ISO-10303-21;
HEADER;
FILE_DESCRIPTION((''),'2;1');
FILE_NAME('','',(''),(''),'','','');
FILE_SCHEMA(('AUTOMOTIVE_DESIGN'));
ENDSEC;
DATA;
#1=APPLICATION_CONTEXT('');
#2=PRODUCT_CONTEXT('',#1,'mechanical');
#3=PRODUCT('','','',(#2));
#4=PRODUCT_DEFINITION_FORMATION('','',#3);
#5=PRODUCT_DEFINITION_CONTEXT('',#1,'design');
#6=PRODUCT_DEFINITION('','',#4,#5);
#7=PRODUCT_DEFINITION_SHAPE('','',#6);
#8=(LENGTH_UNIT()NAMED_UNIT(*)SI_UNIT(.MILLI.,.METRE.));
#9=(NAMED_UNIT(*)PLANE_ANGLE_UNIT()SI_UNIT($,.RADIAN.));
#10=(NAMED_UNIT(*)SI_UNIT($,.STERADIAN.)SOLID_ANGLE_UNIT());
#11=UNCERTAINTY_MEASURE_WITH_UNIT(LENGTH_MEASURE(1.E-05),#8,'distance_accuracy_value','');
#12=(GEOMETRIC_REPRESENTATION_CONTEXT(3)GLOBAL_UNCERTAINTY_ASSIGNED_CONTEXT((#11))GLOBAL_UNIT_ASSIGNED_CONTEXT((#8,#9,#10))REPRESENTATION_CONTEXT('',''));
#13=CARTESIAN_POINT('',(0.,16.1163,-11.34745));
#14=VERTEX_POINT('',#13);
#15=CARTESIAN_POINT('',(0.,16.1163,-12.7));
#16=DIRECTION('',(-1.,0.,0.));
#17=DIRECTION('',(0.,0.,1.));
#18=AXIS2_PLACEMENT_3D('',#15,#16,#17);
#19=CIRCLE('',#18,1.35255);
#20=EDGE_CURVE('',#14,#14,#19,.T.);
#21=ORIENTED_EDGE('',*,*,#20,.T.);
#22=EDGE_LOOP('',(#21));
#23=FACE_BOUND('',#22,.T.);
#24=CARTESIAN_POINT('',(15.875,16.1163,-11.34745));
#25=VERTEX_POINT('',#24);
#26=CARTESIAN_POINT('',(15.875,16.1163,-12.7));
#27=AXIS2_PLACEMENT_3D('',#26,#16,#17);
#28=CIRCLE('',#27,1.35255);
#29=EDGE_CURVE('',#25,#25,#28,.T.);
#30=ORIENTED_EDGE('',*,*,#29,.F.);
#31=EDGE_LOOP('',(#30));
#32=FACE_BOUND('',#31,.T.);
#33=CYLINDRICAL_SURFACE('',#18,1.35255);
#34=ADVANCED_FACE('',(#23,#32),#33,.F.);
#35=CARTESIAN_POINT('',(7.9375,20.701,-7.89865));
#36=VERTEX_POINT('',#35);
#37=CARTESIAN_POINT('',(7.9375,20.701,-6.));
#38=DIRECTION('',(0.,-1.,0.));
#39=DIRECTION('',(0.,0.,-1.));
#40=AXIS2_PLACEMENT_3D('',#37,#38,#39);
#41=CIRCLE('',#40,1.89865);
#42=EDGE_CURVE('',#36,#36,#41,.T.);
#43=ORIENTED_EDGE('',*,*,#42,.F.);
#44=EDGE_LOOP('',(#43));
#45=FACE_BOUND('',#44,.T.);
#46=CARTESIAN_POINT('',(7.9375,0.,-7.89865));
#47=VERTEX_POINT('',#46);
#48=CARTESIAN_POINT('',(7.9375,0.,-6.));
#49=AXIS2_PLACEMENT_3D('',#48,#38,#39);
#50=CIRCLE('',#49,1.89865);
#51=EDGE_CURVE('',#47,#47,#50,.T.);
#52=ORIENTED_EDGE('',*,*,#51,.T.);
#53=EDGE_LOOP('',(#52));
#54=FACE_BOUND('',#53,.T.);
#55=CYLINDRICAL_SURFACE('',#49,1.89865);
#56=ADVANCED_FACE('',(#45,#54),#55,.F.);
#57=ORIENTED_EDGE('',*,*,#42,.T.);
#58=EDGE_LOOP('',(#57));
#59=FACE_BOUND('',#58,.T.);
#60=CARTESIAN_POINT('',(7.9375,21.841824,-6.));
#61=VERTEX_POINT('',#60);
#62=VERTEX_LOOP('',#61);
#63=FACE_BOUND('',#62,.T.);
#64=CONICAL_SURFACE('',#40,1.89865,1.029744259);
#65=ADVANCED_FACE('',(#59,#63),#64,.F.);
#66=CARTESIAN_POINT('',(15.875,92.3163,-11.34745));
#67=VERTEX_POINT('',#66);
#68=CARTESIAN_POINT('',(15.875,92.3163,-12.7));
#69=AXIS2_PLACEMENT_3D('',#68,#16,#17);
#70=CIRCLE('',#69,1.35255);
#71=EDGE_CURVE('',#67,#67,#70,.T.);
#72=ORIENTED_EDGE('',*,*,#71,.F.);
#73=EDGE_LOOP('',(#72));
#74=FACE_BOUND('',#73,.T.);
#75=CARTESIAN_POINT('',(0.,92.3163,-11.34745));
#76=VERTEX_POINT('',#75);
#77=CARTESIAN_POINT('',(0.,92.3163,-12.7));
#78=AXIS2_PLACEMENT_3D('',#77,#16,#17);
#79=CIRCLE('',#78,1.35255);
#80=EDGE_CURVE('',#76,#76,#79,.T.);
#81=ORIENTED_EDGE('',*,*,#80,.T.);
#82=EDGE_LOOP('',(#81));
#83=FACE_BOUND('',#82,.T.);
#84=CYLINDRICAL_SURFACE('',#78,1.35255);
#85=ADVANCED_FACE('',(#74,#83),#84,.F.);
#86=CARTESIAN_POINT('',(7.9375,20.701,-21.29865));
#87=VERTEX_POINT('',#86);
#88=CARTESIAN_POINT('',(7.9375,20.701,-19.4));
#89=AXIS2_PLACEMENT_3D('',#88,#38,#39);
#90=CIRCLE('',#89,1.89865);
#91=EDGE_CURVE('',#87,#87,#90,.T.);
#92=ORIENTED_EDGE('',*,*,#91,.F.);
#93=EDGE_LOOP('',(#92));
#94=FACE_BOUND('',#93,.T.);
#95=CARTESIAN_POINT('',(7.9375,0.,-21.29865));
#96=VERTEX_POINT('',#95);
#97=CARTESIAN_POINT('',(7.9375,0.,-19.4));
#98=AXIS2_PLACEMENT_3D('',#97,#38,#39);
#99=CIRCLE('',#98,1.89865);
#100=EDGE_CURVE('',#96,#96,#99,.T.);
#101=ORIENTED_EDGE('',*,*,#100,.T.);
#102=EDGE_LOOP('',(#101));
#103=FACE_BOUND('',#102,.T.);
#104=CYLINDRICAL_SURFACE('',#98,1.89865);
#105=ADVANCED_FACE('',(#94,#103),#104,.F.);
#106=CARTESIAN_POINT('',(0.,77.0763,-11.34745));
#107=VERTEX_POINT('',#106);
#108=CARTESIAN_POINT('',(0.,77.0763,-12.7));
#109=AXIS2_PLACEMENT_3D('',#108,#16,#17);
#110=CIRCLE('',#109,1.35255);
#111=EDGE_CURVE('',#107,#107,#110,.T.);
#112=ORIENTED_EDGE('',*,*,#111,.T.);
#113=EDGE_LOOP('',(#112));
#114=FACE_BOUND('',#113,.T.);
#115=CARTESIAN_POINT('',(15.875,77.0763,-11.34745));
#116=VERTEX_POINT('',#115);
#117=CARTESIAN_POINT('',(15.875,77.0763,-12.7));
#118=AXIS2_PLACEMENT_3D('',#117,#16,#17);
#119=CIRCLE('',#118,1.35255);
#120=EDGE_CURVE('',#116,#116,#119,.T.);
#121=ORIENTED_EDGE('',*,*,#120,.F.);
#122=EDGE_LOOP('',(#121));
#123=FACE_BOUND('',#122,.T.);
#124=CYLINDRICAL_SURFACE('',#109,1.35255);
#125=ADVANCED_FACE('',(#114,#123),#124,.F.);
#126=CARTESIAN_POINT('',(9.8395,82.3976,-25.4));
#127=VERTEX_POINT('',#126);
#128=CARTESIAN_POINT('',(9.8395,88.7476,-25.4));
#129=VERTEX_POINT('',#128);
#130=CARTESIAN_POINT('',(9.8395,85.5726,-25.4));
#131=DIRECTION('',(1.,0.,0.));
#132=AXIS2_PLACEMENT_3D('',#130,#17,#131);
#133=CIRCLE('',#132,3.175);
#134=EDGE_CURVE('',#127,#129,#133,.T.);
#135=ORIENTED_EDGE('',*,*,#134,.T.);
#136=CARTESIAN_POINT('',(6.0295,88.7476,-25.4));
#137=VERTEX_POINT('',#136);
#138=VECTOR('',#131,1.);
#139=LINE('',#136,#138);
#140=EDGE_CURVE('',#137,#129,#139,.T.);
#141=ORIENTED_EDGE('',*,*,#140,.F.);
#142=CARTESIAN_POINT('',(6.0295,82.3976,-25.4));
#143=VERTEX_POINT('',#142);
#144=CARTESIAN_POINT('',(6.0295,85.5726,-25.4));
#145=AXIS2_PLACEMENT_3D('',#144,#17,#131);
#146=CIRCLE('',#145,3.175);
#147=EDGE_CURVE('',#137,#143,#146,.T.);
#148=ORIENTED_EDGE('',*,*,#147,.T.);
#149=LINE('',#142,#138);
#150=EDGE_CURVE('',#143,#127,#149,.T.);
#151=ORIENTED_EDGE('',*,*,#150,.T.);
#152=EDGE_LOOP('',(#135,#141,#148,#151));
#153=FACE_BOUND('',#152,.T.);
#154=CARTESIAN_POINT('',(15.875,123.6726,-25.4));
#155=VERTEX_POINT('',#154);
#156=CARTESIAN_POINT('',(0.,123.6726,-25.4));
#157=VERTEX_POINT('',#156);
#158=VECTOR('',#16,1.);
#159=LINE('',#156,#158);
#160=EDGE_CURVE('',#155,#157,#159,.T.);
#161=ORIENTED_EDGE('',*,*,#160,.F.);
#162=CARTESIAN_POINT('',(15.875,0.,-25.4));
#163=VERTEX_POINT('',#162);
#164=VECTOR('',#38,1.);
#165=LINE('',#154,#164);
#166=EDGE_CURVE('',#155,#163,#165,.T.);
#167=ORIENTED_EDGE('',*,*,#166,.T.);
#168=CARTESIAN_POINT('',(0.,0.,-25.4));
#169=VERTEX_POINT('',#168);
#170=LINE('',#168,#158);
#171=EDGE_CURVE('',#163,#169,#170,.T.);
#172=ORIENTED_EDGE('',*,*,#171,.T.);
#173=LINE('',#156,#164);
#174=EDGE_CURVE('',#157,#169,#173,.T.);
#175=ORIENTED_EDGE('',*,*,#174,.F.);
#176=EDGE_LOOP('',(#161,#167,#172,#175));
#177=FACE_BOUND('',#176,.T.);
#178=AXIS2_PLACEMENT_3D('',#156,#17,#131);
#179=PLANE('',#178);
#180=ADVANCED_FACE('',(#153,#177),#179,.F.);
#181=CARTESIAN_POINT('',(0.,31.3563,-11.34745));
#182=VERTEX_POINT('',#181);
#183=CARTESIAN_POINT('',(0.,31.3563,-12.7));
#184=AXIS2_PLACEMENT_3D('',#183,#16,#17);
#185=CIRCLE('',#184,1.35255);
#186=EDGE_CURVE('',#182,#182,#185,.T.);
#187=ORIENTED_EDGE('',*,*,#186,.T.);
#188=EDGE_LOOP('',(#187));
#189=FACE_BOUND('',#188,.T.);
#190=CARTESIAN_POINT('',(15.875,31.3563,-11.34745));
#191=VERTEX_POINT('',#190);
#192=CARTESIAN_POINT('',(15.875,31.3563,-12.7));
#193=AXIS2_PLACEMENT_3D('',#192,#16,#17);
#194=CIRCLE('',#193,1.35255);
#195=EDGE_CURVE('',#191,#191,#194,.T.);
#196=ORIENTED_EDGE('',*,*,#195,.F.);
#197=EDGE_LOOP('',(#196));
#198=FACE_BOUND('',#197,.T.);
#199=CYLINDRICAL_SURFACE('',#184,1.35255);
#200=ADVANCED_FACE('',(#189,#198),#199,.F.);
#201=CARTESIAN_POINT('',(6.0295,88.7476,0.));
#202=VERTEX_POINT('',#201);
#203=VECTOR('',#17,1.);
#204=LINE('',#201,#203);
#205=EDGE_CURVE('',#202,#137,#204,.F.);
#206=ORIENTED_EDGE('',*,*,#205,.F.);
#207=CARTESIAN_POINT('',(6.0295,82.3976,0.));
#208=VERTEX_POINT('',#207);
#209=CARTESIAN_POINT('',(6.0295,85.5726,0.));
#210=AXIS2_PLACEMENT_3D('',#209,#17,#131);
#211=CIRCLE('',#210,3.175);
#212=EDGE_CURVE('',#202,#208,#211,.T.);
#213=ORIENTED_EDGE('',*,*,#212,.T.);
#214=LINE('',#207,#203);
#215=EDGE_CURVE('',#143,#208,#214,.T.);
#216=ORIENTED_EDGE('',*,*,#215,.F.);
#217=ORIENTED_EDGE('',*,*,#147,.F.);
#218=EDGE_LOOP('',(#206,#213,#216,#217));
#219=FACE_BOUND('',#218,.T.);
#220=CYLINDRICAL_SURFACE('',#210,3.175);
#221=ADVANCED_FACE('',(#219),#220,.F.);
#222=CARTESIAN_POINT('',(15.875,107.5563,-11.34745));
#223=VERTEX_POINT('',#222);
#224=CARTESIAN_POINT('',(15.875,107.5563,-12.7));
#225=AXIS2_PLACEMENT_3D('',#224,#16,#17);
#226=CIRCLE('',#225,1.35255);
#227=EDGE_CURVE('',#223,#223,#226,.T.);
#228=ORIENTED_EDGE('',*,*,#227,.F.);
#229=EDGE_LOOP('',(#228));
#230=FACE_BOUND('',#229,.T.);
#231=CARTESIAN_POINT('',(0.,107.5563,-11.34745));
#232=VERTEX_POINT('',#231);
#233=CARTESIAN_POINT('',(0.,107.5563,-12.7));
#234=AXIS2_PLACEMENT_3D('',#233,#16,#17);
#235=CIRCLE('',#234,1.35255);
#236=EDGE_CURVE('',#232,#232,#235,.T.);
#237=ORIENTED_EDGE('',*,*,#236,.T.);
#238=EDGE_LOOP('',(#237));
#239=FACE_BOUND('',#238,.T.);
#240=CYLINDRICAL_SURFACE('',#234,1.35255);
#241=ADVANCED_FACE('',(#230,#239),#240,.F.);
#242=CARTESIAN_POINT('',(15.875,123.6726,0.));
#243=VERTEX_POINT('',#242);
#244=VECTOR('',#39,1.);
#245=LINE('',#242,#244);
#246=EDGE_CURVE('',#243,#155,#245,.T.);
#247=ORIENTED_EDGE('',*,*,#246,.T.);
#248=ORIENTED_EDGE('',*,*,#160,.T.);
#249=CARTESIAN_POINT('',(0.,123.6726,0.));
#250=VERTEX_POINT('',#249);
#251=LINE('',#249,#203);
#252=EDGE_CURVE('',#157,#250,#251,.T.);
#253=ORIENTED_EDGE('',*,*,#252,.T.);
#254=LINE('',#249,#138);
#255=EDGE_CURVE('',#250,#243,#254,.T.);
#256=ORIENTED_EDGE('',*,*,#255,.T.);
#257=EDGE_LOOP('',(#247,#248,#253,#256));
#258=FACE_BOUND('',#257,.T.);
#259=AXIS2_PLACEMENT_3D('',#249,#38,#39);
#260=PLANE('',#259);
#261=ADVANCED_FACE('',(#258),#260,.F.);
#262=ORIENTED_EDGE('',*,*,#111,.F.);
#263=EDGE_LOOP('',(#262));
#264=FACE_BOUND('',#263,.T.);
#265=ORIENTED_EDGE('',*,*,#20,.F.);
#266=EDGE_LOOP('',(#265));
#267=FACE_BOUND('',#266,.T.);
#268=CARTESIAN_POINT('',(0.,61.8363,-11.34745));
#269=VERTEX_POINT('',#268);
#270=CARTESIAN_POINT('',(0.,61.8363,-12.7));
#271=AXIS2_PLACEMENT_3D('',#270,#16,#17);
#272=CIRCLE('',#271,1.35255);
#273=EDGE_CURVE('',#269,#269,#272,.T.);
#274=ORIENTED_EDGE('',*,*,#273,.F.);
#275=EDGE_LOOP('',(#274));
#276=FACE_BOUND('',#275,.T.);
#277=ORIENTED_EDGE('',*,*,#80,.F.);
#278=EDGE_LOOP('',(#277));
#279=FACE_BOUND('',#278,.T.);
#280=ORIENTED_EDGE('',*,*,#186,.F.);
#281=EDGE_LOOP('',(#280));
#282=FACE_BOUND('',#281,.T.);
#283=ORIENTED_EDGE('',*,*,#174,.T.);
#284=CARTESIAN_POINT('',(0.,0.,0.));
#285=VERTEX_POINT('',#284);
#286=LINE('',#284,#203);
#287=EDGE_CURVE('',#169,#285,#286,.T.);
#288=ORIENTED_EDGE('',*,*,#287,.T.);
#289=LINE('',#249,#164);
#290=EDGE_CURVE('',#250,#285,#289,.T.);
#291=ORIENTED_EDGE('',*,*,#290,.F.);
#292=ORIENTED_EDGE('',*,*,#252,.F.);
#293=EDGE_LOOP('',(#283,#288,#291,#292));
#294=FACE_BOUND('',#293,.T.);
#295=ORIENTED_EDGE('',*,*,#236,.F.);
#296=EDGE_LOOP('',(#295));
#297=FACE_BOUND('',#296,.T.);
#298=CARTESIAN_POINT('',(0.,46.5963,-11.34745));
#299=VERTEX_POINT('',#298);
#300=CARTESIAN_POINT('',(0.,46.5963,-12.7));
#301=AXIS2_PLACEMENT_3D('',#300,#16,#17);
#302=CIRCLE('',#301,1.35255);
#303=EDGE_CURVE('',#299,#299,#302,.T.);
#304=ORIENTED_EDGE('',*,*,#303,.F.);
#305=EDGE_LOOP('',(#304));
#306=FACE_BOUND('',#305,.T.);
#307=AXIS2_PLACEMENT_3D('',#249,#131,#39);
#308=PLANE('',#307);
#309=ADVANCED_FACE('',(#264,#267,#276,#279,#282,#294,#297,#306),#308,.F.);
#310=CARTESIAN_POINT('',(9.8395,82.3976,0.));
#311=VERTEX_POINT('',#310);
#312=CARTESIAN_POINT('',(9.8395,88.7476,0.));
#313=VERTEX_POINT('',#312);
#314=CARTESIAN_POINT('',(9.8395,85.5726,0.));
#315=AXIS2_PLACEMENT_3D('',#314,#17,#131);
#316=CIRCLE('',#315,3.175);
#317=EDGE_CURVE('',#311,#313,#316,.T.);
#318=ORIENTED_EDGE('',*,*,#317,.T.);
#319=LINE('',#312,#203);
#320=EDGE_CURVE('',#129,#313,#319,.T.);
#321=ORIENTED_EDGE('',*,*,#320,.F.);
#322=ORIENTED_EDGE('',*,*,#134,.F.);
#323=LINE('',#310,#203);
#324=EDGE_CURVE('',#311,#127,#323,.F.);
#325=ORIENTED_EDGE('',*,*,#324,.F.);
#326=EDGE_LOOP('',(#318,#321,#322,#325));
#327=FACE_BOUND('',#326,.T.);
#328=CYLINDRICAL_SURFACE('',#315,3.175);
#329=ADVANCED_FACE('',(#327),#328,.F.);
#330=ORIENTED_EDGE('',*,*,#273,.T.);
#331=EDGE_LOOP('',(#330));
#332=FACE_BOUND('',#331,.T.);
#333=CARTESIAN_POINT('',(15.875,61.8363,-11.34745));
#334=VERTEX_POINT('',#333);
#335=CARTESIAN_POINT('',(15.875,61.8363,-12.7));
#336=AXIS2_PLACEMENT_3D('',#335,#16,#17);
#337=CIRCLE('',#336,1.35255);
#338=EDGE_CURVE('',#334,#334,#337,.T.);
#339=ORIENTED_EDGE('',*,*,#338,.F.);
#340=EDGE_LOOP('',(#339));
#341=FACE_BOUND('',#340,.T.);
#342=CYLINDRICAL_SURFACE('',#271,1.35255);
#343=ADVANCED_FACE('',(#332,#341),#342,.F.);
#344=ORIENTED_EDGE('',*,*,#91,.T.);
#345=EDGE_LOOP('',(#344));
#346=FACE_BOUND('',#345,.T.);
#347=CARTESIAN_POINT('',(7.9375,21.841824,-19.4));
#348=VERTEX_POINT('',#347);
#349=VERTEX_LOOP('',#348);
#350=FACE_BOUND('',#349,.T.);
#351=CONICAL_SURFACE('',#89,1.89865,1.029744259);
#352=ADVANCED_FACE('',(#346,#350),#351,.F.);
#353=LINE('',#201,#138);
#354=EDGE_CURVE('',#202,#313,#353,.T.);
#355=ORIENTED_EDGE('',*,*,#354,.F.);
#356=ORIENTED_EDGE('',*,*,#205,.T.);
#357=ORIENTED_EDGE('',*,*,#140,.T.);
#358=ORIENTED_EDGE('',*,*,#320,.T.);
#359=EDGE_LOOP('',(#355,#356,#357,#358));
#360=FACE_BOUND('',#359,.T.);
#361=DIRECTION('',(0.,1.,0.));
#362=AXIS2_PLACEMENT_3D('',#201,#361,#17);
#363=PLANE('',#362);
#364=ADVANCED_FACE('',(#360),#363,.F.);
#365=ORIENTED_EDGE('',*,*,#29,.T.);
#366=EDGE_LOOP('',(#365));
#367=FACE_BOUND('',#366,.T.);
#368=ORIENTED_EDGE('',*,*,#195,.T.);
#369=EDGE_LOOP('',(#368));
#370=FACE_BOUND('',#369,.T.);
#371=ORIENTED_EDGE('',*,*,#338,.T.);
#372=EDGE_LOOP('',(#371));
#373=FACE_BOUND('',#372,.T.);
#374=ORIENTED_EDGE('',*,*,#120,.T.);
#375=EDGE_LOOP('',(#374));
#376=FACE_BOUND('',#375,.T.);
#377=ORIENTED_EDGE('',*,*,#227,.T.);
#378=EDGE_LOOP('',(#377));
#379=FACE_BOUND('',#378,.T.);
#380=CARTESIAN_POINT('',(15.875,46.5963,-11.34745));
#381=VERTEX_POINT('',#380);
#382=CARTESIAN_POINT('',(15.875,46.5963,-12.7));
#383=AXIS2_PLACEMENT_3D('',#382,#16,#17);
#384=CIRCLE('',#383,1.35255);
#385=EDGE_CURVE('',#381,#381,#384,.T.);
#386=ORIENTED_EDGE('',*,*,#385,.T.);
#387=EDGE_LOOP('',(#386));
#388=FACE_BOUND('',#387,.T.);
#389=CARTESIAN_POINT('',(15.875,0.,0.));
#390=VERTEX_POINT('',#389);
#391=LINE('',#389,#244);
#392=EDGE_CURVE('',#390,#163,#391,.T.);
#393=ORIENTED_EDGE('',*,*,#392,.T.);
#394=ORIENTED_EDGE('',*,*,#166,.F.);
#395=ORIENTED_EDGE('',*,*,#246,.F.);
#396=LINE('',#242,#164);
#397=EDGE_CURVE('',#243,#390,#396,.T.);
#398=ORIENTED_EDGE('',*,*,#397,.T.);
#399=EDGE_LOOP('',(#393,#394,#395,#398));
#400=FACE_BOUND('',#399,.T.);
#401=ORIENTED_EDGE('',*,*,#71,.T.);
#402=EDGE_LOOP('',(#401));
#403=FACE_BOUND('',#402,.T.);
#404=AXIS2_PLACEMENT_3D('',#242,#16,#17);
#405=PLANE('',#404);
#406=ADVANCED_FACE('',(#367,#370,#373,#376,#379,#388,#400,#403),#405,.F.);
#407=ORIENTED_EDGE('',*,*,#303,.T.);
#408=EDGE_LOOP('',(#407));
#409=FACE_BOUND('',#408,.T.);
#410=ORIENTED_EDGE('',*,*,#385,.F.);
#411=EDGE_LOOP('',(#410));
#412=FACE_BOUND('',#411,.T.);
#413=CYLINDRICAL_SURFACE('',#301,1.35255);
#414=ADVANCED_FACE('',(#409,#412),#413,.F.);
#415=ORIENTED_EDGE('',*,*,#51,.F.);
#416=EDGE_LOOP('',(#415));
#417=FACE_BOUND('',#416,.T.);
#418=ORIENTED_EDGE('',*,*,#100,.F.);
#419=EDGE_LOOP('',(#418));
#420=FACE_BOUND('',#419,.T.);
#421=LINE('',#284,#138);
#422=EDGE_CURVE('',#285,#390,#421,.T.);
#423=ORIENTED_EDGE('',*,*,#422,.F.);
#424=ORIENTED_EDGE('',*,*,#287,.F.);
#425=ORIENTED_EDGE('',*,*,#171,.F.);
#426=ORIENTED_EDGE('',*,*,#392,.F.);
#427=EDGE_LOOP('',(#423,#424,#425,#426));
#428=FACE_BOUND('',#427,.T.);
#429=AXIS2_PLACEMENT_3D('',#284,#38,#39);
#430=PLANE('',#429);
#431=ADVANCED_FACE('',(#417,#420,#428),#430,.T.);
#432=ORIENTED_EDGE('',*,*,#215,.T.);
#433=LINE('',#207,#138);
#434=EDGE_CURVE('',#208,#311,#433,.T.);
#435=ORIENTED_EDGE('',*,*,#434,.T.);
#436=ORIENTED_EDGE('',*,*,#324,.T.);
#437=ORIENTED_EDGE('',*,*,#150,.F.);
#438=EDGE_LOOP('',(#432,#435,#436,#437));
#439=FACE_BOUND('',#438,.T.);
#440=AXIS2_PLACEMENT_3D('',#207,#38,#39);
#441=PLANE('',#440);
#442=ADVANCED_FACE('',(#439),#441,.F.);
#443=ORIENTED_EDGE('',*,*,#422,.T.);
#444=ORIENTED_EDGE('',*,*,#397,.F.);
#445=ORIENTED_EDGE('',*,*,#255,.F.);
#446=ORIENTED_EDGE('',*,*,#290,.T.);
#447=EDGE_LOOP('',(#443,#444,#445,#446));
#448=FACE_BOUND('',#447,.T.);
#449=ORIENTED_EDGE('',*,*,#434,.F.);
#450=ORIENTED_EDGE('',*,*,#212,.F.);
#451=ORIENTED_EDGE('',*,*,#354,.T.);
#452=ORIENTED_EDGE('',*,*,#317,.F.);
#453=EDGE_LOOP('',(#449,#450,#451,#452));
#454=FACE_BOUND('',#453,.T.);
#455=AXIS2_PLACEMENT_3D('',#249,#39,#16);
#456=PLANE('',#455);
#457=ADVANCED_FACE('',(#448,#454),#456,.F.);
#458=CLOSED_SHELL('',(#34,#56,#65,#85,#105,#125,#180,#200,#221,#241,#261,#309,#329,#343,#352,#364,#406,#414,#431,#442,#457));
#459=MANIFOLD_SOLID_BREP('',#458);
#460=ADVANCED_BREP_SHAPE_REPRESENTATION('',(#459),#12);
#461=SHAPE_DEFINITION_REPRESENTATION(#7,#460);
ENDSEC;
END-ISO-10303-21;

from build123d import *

# Parameters (mm, degrees)
SKETCH1_W                           = 15.875
SKETCH1_H                           = 25.4
BOSS_EXTRUDE1_DEPTH                 = 123.6726
TAP_DRILL_FOR_10_24_TAP1_D          = 3.7973
TAP_DRILL_FOR_10_24_TAP1_DEPTH      = 20.701
TAP_DRILL_FOR_10_24_TAP1_TIP        = 1.140824014
TAP_DRILL_FOR_6_32_TAP1_D           = 2.7051
TAP_START                           = -25.4
TAP_DRILL_SLOT_FOR_10_24_TAP1_DEPTH = 25.4
TAP_DRILL_SLOT_FOR_10_24_TAP2_D     = 6.35


# Read off the part's stored shape, not the designer's step: Tap Drill Slot for #10-24 Tap1
with BuildPart() as part:
    # Sketch1 → Boss-Extrude1 (new body)
    with BuildSketch(Plane(origin=(0, 0, 0), x_dir=(1, 0, 0), z_dir=(0, 1, 0))):
        with Locations((7.9375, 12.7)):
            Rectangle(SKETCH1_W, SKETCH1_H)
    extrude(amount=BOSS_EXTRUDE1_DEPTH)

    # Tap Drill for #10-24 Tap1
    with Locations(Plane(origin=(0, 0, 0), x_dir=(-1, 0, 0), z_dir=(0, -1, 0))):
        with Locations((-7.9375, 6), (-7.9375, 19.4)):
            Hole(TAP_DRILL_FOR_10_24_TAP1_D / 2, depth=TAP_DRILL_FOR_10_24_TAP1_DEPTH)
            with Locations((0, 0, -(TAP_DRILL_FOR_10_24_TAP1_DEPTH + TAP_DRILL_FOR_10_24_TAP1_TIP / 2))):  # 118° drill point
                Cone(0, TAP_DRILL_FOR_10_24_TAP1_D / 2, TAP_DRILL_FOR_10_24_TAP1_TIP, mode=Mode.SUBTRACT)

    # Tap Drill for #6-32 Tap1 (through all)
    with Locations(Plane.ZY):
        with Locations((-12.7, 61.8363), (-12.7, 77.0763), (-12.7, 92.3163), (-12.7, 46.5963), (-12.7, 31.3563), (-12.7, 107.5563), (-12.7, 16.1163)):
            Hole(TAP_DRILL_FOR_6_32_TAP1_D / 2)

    # Tap Drill Slot for #10-24 Tap1 outline → Tap Drill Slot for #10-24 Tap1 (cut)
    with BuildSketch(Plane.XY.offset(TAP_START)):
        with BuildLine():
            Line((6.029499774, 82.3976), (9.839499774, 82.3976))
            ThreePointArc((9.839499774, 82.3976), (13.014499774, 85.5726), (9.839499774, 88.7476))
            Line((9.839499774, 88.7476), (6.029499774, 88.7476))
            ThreePointArc((6.029499774, 88.7476), (2.854499774, 85.5726), (6.029499774, 82.3976))
        make_face()
    extrude(amount=TAP_DRILL_SLOT_FOR_10_24_TAP1_DEPTH, mode=Mode.SUBTRACT)

    # Tap Drill Slot for #10-24 Tap2 (through all)
    with Locations(Plane(origin=(-765.990733255, -1637.545835602, 0), x_dir=(1, 0, 0), z_dir=(0, 0, 1))):
        with Locations((773.925233029, 1723.118435602)):
            Hole(TAP_DRILL_SLOT_FOR_10_24_TAP2_D / 2)


solid = part.part
